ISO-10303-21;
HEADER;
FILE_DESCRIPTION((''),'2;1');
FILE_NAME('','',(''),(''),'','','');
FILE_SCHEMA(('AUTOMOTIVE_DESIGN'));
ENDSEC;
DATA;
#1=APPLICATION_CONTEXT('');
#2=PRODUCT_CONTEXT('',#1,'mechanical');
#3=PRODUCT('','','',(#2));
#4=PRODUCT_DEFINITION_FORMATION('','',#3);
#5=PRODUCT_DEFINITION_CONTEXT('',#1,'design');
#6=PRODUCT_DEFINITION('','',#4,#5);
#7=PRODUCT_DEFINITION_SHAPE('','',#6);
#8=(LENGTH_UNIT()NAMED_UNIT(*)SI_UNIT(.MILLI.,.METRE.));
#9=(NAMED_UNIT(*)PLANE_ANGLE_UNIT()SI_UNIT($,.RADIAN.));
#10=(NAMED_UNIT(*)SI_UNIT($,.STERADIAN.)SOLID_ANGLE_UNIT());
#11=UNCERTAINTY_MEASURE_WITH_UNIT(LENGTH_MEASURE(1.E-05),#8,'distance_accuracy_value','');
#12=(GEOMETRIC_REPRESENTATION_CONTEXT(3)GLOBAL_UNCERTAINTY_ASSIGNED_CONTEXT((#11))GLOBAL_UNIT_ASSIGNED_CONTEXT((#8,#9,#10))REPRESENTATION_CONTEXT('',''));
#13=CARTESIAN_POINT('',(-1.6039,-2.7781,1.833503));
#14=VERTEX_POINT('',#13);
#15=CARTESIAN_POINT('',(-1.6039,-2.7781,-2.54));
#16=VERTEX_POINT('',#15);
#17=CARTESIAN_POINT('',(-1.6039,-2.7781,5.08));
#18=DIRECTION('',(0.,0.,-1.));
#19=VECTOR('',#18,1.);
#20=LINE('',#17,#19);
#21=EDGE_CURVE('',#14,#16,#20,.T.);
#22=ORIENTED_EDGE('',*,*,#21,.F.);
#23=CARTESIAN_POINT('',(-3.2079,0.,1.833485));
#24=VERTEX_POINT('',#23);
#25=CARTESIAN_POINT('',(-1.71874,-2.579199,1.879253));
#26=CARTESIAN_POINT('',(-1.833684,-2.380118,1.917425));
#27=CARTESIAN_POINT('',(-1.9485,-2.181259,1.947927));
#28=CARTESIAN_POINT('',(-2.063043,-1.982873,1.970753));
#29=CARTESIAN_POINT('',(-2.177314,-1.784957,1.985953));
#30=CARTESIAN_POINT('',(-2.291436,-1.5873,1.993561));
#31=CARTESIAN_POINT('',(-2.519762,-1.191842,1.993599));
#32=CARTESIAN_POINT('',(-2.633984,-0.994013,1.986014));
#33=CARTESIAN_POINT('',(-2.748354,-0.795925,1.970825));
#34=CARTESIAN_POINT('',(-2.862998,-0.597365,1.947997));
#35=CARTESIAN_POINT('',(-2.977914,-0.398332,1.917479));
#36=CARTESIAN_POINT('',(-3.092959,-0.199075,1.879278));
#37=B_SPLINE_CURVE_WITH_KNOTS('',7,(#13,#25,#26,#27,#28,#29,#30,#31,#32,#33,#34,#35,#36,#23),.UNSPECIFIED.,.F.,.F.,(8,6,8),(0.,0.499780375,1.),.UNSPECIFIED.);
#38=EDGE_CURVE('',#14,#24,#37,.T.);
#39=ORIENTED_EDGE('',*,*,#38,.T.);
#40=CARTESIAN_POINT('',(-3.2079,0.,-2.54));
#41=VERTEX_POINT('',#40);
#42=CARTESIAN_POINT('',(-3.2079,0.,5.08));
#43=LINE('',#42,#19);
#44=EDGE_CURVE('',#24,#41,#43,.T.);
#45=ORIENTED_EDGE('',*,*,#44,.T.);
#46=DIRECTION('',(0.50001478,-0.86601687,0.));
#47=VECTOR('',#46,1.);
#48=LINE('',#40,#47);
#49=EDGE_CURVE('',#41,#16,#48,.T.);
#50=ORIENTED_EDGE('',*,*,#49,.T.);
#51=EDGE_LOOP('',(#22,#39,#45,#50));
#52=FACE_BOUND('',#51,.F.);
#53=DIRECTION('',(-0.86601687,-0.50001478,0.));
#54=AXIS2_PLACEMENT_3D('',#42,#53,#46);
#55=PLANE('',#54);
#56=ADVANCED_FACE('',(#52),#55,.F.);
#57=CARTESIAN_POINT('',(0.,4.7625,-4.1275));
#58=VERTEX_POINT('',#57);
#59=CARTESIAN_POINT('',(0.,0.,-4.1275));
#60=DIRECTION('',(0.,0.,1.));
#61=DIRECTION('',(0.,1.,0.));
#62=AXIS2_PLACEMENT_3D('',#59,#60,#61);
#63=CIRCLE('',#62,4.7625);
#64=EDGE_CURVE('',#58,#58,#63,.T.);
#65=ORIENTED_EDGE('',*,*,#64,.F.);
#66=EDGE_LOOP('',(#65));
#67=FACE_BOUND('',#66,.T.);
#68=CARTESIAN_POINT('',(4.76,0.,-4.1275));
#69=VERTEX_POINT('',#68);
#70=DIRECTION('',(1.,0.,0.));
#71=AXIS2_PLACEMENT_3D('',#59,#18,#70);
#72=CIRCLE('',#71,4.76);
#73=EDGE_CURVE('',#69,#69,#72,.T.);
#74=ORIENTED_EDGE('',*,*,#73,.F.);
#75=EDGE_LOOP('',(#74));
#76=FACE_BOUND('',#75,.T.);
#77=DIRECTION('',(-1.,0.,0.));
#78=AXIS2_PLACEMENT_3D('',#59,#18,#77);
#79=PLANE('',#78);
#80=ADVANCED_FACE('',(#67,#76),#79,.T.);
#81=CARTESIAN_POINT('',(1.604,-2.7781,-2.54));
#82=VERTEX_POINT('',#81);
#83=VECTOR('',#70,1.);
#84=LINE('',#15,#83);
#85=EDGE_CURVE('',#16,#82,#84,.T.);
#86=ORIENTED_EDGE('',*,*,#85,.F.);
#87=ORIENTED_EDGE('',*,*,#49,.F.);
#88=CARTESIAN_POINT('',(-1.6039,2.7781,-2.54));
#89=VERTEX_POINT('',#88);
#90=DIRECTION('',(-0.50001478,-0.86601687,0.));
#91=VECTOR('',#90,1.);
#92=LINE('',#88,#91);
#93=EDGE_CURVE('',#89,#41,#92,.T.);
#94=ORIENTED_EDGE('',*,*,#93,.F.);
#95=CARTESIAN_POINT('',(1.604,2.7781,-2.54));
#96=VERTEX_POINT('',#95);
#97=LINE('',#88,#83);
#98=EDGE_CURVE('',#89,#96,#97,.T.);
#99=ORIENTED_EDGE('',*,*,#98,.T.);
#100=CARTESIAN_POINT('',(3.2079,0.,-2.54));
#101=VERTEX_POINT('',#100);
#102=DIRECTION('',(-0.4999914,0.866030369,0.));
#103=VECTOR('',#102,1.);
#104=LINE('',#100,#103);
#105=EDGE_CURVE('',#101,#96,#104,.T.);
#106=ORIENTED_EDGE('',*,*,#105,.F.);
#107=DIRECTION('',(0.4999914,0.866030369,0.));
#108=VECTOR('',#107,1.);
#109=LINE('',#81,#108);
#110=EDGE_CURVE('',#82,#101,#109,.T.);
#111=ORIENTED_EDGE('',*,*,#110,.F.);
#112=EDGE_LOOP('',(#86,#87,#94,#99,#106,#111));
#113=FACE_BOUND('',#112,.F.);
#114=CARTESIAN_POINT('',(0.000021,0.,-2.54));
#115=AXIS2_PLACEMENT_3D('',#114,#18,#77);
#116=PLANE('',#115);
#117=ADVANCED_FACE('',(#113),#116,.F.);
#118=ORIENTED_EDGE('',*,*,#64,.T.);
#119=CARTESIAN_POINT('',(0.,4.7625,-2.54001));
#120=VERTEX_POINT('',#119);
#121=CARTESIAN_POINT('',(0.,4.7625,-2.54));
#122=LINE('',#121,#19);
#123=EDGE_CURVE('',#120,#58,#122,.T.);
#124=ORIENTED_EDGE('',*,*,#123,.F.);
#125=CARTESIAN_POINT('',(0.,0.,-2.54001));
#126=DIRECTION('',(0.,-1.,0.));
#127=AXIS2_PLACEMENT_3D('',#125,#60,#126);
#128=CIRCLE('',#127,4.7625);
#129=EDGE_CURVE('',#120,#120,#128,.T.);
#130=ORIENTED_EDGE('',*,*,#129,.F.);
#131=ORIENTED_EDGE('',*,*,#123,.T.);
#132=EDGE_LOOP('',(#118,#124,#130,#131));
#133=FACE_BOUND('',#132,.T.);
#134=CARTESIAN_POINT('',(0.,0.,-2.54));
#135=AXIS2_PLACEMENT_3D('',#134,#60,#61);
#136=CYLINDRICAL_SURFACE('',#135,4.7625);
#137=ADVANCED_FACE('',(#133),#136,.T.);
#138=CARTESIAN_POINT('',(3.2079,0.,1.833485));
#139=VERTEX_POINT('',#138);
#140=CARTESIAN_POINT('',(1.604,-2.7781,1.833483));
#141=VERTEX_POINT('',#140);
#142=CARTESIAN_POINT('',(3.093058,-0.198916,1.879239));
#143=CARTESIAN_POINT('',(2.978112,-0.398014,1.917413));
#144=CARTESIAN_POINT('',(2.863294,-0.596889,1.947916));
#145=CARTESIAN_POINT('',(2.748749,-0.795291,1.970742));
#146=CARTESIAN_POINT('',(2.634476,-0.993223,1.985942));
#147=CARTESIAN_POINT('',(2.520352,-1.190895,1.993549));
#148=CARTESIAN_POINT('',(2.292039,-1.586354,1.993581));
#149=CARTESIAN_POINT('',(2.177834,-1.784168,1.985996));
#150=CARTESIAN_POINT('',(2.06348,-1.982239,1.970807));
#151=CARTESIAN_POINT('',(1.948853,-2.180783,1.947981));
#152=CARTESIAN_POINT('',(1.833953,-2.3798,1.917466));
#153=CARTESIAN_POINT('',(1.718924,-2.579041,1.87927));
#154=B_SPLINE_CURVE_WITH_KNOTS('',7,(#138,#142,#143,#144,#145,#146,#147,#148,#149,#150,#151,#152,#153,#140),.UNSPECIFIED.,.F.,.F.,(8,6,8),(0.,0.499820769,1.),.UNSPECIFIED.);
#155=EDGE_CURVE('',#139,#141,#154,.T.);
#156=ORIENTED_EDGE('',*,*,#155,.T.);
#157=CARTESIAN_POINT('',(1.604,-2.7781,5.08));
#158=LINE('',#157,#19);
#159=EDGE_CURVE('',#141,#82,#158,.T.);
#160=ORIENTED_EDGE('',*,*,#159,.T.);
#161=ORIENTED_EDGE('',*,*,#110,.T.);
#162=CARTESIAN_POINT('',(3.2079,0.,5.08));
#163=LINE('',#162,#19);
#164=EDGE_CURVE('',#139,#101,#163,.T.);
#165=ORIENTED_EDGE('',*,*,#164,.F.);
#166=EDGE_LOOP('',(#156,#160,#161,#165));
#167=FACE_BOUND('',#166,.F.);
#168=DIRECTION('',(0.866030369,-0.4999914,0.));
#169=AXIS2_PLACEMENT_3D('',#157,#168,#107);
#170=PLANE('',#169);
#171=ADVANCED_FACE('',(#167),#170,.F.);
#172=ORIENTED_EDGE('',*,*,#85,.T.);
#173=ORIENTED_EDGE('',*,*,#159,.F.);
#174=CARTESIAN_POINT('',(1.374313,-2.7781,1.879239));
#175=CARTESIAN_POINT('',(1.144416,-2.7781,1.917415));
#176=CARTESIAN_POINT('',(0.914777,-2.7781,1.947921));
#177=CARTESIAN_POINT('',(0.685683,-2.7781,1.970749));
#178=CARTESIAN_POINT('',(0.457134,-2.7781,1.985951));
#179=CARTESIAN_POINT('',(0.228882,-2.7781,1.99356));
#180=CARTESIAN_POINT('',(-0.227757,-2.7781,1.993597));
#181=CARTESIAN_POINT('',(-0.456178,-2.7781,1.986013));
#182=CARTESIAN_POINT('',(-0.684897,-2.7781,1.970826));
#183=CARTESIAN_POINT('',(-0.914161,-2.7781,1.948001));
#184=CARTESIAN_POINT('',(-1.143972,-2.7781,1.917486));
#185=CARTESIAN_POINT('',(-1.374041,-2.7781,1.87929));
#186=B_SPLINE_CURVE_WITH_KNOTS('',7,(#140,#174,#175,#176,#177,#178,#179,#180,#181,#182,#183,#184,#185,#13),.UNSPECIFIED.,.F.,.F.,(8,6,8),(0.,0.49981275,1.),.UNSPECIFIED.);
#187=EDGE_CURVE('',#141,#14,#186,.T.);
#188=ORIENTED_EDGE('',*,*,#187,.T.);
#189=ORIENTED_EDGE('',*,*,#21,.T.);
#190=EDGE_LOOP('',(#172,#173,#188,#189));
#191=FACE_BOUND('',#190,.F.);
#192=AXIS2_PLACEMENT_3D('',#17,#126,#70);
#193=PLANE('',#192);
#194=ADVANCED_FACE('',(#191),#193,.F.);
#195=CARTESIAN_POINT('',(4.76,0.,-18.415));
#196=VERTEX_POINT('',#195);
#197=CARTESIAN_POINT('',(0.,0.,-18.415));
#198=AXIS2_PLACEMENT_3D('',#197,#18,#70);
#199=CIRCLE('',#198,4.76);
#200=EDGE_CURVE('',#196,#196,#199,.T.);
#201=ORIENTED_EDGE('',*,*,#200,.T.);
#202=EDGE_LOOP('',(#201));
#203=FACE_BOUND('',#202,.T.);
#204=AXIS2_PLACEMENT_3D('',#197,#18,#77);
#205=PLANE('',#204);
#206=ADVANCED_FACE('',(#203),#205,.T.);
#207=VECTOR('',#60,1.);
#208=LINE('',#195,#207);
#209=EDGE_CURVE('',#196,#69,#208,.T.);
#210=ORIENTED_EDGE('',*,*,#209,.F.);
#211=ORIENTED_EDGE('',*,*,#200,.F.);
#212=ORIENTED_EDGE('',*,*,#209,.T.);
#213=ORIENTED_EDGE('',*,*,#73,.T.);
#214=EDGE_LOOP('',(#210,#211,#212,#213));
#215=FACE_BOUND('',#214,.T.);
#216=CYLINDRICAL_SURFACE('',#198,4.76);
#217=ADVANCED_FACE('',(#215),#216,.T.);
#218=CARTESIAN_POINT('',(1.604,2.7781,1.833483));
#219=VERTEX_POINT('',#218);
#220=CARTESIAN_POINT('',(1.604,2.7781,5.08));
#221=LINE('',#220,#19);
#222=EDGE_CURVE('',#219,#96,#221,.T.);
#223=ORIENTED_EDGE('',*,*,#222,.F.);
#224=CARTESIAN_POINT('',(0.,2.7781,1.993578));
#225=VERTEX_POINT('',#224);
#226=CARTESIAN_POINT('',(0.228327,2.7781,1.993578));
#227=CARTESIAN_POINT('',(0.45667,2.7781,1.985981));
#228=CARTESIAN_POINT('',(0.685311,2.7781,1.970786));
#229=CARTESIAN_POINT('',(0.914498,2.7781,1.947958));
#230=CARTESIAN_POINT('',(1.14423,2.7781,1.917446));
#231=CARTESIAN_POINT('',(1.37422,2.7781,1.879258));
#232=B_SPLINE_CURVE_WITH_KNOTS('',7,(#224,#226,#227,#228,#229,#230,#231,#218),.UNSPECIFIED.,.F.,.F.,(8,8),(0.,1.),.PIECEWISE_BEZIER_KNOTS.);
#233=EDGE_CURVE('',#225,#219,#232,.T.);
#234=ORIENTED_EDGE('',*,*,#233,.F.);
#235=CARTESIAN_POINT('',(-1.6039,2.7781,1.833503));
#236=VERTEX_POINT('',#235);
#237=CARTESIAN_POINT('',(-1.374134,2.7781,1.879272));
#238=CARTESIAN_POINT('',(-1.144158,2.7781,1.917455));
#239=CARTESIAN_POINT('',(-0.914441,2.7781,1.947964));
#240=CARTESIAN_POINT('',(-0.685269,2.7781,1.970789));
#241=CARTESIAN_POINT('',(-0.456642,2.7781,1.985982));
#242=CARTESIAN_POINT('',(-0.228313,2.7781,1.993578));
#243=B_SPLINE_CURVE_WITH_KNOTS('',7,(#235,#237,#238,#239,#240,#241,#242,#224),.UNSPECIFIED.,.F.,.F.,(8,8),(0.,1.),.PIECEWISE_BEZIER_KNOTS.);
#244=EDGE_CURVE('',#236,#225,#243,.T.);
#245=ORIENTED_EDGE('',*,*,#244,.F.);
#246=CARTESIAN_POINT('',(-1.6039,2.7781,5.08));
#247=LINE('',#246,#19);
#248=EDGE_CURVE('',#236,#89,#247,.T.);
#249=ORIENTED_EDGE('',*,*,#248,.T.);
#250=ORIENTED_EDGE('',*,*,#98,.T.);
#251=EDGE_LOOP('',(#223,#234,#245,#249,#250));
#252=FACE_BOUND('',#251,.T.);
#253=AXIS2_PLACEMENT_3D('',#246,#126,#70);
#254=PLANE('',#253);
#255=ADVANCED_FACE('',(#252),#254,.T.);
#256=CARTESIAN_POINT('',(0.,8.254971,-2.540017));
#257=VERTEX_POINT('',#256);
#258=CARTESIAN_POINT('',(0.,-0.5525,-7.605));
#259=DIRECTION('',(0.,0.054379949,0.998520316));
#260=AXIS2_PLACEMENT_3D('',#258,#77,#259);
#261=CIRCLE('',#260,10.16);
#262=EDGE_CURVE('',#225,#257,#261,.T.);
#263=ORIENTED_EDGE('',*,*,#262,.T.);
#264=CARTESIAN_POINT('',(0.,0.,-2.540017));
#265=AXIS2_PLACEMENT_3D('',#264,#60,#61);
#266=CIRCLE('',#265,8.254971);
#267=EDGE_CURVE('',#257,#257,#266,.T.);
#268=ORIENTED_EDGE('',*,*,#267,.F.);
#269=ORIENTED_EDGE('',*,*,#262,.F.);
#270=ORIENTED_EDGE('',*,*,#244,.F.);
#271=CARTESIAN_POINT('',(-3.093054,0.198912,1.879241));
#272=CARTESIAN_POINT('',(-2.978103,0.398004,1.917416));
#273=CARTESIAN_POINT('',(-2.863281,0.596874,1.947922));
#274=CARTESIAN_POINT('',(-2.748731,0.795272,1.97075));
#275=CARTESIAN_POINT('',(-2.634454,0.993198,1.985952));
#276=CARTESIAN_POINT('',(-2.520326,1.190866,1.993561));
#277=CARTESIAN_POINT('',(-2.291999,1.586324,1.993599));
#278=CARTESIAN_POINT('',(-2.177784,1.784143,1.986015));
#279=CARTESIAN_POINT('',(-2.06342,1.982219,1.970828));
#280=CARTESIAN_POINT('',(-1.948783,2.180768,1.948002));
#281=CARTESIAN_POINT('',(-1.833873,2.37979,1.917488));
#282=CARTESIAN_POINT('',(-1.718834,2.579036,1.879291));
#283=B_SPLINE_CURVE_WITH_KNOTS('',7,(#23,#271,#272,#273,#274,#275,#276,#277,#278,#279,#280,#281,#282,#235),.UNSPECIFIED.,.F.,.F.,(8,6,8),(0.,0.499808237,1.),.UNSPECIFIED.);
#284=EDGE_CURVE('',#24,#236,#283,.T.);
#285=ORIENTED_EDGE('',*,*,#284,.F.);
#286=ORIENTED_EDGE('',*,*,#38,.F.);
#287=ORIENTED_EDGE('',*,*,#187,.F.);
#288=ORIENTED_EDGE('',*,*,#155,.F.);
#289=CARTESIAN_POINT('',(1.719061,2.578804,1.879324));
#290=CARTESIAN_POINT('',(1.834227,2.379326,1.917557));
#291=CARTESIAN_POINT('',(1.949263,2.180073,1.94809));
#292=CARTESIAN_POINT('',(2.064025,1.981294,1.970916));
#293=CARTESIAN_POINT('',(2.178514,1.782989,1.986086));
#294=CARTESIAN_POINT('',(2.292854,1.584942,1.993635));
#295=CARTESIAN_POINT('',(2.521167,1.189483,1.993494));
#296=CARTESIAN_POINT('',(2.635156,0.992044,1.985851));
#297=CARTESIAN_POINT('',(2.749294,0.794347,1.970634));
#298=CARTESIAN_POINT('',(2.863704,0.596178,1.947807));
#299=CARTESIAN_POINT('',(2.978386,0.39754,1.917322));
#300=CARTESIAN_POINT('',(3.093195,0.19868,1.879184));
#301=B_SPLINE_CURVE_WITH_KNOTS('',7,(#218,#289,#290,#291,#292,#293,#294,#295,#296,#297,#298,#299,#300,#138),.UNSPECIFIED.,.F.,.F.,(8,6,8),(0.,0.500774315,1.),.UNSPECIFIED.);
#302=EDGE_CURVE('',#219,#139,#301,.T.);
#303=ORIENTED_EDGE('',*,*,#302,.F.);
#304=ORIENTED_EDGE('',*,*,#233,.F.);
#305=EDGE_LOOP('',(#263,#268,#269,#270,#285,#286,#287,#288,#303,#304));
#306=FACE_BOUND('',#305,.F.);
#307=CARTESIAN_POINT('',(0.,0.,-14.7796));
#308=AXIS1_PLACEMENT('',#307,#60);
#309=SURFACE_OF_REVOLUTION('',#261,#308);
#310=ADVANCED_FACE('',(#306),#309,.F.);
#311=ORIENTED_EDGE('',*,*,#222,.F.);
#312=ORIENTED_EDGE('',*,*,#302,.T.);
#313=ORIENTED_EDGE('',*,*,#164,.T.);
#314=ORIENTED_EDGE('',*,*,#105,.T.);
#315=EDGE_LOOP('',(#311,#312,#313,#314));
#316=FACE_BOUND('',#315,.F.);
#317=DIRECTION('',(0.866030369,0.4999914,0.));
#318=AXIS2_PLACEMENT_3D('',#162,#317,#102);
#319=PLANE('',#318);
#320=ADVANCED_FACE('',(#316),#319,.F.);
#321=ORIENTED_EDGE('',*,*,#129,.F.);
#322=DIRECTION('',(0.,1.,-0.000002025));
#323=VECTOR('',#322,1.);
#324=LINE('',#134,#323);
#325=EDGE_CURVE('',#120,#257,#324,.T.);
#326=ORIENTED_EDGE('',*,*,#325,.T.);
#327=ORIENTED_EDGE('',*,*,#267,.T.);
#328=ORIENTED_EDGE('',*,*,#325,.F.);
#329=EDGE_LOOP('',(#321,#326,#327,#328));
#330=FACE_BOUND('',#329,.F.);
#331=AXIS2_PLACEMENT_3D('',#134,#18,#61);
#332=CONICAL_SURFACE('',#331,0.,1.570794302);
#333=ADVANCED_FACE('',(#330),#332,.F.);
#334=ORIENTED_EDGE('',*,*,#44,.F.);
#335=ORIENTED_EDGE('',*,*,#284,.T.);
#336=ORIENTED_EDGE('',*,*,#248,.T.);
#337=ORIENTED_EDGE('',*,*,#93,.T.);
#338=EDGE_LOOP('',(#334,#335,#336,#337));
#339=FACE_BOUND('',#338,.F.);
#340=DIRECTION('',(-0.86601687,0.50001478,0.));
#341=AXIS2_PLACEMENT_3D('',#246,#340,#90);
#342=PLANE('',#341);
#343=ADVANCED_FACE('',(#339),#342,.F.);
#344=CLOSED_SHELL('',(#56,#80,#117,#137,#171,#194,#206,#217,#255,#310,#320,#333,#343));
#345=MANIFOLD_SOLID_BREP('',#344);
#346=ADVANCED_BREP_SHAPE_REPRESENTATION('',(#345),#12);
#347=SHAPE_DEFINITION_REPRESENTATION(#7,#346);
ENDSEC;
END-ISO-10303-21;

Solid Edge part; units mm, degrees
sketch "Sketch1" plane through (0, 0, 0) normal (1, 0, 0) x (0, 1, 0)
  line L0 (0, -2.54) -> (0, 2.54)
  arc A0 (0, 2.54) -> (8.255, -2.54) centre (-0.5525, -7.605) cw
  line L1 (0, -2.54) -> (8.255, -2.54)
  dimension "D1" = 5.08
  dimension "D2" = 10.16
revolve "RevolvedProtrusion1" add sketch "Sketch1" angle 360 about axis through (0, 0, -14.7796) along (0, 0, 1)
sketch "Sketch2" plane through (0, 0, -2.54) normal (0, 0, -1) x (0, 1, 0)
  circle A0 centre (0, 0) radius 4.7625
  dimension "D1" = 9.525
extrude "Protrusion1" add sketch "Sketch2" along normal blind 15.875
sketch "Sketch3" plane through (0, 0, -18.415) normal (0, 0, -1) x (1, 0, 0)
  circle A0 centre (0, 0) radius 4.76
  dimension "D1" = 0.0025
extrude "Cutout1" cut sketch "Sketch3" against normal blind 14.2875 flip side to cut
sketch "Sketch4" plane through (-0.6032, 0.3606, 5.08) normal (0, 0, 1) x (1, 0, 0)
  line L0 (-1.0007, 2.4175) -> (2.2072, 2.4175)
  line L1 (3.8111, -0.3606) -> (2.2072, 2.4175)
  line L2 (2.2072, -3.1387) -> (3.8111, -0.3606)
  line L3 (-1.0007, -3.1387) -> (2.2072, -3.1387)
  line L4 (-2.6047, -0.3606) -> (-1.0007, -3.1387)
  line L5 (-1.0007, 2.4175) -> (-2.6047, -0.3606)
extrude "ExtrudedCutout_11" cut sketch "Sketch4" against normal blind 7.62
properties part number "163739"
